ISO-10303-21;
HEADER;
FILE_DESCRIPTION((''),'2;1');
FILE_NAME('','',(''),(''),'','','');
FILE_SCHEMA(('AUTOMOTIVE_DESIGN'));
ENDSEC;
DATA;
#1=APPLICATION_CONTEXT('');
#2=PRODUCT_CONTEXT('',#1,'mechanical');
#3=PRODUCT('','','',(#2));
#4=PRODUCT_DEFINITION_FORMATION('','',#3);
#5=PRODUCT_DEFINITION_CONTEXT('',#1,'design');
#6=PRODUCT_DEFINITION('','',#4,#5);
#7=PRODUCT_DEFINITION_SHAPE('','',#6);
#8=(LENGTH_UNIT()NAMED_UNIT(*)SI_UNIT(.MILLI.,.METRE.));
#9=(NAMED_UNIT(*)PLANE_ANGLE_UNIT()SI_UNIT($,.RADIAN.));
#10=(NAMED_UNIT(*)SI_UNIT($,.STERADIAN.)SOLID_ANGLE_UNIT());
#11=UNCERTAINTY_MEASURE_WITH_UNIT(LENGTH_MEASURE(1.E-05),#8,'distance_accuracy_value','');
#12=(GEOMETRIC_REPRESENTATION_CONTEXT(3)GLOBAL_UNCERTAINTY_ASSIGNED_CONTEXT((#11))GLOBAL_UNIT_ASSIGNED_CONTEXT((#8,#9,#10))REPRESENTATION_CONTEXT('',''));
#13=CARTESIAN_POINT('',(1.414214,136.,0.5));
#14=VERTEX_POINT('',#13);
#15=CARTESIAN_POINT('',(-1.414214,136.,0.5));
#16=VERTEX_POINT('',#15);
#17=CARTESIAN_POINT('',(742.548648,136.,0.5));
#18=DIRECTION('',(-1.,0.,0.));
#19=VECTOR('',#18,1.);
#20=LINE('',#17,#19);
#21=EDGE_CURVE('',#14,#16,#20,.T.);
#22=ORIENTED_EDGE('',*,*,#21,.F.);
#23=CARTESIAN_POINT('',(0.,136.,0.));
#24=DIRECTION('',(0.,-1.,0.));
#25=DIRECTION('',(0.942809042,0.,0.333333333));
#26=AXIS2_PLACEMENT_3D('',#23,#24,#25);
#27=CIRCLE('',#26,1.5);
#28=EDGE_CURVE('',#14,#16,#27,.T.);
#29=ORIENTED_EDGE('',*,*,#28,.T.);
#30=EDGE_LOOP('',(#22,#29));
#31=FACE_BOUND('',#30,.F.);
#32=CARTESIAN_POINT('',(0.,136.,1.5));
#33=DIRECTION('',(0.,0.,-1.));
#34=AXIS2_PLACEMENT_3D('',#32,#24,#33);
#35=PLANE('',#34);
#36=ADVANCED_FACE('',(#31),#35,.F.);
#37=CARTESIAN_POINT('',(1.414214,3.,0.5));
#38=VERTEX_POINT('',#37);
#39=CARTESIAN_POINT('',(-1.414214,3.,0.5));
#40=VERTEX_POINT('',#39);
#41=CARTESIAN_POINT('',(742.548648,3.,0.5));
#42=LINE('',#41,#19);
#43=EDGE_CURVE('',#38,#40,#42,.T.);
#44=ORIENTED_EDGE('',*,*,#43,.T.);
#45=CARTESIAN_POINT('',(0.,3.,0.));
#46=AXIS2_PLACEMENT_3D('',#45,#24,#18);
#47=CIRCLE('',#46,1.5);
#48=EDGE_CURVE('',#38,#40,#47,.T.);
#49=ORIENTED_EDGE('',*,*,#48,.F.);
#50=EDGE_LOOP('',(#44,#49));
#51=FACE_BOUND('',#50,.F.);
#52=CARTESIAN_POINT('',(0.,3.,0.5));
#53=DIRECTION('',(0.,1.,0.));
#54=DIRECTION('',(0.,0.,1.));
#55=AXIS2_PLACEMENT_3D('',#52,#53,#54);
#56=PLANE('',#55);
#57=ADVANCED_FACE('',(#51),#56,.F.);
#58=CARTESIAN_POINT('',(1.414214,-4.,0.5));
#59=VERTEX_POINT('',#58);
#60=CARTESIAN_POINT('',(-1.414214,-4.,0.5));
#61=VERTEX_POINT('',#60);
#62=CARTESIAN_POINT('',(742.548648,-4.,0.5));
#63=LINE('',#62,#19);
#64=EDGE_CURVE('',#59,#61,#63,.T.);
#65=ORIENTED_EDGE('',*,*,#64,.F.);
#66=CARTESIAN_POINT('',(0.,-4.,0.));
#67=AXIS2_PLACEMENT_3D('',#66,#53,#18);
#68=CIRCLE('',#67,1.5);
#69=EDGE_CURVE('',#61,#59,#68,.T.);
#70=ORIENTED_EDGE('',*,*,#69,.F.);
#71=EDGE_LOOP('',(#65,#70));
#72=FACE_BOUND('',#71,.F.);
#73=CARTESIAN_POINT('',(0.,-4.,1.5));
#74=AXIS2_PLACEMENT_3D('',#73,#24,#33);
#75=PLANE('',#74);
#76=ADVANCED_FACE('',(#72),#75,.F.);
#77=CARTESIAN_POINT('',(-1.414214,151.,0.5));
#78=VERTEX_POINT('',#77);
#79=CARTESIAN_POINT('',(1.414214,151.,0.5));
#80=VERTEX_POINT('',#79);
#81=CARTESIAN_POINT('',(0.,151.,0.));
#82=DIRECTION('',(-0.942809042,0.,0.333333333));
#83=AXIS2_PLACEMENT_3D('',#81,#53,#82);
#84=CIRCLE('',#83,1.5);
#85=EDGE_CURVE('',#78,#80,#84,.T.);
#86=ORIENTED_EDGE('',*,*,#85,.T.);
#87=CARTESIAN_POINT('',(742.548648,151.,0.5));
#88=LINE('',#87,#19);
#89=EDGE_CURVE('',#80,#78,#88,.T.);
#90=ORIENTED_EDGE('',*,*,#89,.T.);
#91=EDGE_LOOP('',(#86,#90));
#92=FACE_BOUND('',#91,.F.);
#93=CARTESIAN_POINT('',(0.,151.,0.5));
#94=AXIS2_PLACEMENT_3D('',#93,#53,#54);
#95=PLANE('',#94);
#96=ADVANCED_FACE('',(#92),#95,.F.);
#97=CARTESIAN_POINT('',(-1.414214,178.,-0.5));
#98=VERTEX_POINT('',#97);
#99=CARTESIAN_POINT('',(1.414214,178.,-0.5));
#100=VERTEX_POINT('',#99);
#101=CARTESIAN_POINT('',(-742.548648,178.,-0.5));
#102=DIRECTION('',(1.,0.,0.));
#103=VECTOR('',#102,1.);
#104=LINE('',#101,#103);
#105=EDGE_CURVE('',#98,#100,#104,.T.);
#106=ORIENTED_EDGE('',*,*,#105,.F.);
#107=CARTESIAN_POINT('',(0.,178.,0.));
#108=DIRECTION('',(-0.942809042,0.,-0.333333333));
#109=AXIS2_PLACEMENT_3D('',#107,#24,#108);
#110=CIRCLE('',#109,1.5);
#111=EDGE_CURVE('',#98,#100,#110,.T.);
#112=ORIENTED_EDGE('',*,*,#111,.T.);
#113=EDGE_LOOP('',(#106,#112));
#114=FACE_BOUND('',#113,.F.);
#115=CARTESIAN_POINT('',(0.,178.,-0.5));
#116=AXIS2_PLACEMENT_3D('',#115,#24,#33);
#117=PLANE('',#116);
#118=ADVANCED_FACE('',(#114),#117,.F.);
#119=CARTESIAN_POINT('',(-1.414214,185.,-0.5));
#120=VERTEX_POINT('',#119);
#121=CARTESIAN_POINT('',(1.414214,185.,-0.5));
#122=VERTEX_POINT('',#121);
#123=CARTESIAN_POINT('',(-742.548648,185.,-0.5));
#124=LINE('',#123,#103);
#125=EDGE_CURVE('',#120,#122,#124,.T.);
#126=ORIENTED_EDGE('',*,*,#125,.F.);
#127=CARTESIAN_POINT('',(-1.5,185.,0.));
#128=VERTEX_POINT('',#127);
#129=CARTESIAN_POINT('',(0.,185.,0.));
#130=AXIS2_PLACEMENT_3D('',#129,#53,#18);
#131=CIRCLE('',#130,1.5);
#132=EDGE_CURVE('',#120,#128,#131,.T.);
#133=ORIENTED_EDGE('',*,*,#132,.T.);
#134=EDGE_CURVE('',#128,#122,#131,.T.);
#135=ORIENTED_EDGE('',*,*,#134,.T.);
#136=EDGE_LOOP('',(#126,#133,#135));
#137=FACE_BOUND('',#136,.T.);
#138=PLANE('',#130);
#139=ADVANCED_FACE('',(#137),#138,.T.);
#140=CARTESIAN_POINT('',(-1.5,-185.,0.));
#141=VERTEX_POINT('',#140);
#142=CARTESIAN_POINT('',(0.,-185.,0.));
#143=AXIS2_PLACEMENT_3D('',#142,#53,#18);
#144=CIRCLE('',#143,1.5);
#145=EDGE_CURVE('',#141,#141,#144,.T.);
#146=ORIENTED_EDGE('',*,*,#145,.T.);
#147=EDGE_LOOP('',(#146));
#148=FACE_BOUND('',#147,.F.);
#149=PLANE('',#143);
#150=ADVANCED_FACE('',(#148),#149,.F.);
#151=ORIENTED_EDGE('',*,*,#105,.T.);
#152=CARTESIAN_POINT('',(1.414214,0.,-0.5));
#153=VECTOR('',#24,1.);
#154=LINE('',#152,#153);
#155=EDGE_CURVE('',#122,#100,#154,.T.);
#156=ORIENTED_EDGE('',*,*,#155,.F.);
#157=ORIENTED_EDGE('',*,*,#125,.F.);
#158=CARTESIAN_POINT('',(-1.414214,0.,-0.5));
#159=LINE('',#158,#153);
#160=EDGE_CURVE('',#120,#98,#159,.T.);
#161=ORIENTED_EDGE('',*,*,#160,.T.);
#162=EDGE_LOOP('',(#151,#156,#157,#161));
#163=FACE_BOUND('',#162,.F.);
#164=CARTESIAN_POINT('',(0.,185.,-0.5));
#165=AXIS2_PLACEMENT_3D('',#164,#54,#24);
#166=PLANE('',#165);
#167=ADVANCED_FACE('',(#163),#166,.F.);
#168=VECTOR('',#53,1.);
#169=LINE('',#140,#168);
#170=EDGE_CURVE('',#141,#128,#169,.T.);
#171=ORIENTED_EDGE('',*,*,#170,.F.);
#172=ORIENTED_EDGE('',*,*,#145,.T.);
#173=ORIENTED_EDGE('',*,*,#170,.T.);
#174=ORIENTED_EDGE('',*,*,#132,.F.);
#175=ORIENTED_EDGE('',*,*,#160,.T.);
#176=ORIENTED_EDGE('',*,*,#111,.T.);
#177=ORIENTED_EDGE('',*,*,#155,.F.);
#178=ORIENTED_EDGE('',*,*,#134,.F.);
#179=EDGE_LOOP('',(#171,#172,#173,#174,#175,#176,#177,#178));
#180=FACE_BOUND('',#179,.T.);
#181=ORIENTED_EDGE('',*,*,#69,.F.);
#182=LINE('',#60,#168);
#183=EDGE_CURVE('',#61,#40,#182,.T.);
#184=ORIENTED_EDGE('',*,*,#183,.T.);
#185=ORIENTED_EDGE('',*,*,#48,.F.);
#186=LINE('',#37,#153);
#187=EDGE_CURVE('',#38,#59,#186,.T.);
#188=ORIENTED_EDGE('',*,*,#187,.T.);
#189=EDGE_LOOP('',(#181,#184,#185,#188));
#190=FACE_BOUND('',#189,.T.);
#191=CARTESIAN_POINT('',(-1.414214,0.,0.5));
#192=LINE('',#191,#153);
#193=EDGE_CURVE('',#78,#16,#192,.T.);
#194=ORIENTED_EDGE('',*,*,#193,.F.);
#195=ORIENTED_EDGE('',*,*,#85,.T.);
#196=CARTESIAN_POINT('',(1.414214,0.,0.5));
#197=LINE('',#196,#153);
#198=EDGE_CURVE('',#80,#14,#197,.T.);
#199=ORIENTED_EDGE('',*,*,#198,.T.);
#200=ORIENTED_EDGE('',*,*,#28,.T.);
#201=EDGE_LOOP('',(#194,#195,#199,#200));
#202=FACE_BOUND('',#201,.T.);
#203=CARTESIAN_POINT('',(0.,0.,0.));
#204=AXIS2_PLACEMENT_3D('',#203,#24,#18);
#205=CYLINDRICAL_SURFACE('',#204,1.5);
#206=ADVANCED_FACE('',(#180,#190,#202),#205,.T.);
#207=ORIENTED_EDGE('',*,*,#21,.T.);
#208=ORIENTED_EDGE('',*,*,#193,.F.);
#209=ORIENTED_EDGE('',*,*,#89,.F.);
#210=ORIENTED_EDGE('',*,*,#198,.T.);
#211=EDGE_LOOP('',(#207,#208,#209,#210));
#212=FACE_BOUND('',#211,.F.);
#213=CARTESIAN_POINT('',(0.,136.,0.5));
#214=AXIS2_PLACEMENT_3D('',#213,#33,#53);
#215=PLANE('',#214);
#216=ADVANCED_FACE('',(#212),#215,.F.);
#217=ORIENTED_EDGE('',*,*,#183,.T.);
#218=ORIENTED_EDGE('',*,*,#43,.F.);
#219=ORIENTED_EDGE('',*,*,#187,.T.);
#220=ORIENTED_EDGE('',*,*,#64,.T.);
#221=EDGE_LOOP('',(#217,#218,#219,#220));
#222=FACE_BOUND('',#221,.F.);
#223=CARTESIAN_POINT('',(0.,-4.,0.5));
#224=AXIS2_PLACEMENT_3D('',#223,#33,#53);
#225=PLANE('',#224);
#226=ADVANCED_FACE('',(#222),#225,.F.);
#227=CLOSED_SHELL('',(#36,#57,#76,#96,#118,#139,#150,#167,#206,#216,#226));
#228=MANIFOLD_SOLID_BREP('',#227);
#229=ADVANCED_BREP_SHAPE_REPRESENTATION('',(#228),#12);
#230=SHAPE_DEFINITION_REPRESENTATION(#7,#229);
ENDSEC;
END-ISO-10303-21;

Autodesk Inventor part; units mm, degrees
ref_plane "YZ Plane" through (0, 0, 0) normal (1, 0, 0) x (0, 1, 0)
ref_plane "XZ Plane" through (0, 0, 0) normal (0, 1, 0) x (-1, 0, 0)
ref_plane "XY Plane" through (0, 0, 0) normal (0, 0, 1) x (1, 0, 0)
sketch "Sketch4" plane through (0, 0, 0) normal (0, 1, 0) x (-1, 0, 0)
  circle A0 centre (0, 0) radius 1.5
extrude "Extrusion2" add sketch "Sketch4" along normal mid plane 370
sketch "Sketch13" plane through (0, 0, 0) normal (1, 0, 0) x (0, 1, 0)
  line L0 (185.7937, -0.5) -> (178, -0.5)
  line L1 (178, -0.5) -> (178, -2.4686)
  line L2 (178, -2.4686) -> (185.7937, -2.4686)
  line L3 (185.7937, -2.4686) -> (185.7937, -0.5)
  line L4 (-185, -1.5) -> (185, -1.5) projected
  line L5 (185, -1.5) -> (185, 1.5) projected
  line L6 (151, 2.5026) -> (136, 2.5026)
  line L7 (136, 2.5026) -> (136, 0.5)
  line L8 (136, 0.5) -> (151, 0.5)
  line L9 (151, 0.5) -> (151, 2.5026)
  line L10 (-185, 1.5) -> (185, 1.5) projected
  line L11 (-185, 1.5) -> (-185, -1.5) projected
  line L12 (3, 4.5) -> (-4, 4.5)
  line L13 (-4, 4.5) -> (-4, 0.5)
  line L14 (-4, 0.5) -> (3, 0.5)
  line L15 (3, 0.5) -> (3, 4.5)
  point P0 (0, 0)
  point P1 (151, 1.5)
  point P2 (136, 1.5)
  point P3 (185, -0.5)
  point P4 (178, -1.5)
  dimension "d89" = 1
  dimension "d90" = 7
  dimension "d91" = 1
  dimension "d92" = 15
  dimension "d96" = 34
  dimension "d97" = 1
  dimension "d98" = 7
  dimension "d99" = 182
extrude "Extrusion9" cut sketch "Sketch13" against normal through all both and the other way through all contours L5 L4 L1 L0 | L9 L8 L7 L10 | L15 L14 L13 L10 | L10 L13 L12 L15
properties part number "Rotating Rod 370mm" material "Bronze, Soft Tin"
